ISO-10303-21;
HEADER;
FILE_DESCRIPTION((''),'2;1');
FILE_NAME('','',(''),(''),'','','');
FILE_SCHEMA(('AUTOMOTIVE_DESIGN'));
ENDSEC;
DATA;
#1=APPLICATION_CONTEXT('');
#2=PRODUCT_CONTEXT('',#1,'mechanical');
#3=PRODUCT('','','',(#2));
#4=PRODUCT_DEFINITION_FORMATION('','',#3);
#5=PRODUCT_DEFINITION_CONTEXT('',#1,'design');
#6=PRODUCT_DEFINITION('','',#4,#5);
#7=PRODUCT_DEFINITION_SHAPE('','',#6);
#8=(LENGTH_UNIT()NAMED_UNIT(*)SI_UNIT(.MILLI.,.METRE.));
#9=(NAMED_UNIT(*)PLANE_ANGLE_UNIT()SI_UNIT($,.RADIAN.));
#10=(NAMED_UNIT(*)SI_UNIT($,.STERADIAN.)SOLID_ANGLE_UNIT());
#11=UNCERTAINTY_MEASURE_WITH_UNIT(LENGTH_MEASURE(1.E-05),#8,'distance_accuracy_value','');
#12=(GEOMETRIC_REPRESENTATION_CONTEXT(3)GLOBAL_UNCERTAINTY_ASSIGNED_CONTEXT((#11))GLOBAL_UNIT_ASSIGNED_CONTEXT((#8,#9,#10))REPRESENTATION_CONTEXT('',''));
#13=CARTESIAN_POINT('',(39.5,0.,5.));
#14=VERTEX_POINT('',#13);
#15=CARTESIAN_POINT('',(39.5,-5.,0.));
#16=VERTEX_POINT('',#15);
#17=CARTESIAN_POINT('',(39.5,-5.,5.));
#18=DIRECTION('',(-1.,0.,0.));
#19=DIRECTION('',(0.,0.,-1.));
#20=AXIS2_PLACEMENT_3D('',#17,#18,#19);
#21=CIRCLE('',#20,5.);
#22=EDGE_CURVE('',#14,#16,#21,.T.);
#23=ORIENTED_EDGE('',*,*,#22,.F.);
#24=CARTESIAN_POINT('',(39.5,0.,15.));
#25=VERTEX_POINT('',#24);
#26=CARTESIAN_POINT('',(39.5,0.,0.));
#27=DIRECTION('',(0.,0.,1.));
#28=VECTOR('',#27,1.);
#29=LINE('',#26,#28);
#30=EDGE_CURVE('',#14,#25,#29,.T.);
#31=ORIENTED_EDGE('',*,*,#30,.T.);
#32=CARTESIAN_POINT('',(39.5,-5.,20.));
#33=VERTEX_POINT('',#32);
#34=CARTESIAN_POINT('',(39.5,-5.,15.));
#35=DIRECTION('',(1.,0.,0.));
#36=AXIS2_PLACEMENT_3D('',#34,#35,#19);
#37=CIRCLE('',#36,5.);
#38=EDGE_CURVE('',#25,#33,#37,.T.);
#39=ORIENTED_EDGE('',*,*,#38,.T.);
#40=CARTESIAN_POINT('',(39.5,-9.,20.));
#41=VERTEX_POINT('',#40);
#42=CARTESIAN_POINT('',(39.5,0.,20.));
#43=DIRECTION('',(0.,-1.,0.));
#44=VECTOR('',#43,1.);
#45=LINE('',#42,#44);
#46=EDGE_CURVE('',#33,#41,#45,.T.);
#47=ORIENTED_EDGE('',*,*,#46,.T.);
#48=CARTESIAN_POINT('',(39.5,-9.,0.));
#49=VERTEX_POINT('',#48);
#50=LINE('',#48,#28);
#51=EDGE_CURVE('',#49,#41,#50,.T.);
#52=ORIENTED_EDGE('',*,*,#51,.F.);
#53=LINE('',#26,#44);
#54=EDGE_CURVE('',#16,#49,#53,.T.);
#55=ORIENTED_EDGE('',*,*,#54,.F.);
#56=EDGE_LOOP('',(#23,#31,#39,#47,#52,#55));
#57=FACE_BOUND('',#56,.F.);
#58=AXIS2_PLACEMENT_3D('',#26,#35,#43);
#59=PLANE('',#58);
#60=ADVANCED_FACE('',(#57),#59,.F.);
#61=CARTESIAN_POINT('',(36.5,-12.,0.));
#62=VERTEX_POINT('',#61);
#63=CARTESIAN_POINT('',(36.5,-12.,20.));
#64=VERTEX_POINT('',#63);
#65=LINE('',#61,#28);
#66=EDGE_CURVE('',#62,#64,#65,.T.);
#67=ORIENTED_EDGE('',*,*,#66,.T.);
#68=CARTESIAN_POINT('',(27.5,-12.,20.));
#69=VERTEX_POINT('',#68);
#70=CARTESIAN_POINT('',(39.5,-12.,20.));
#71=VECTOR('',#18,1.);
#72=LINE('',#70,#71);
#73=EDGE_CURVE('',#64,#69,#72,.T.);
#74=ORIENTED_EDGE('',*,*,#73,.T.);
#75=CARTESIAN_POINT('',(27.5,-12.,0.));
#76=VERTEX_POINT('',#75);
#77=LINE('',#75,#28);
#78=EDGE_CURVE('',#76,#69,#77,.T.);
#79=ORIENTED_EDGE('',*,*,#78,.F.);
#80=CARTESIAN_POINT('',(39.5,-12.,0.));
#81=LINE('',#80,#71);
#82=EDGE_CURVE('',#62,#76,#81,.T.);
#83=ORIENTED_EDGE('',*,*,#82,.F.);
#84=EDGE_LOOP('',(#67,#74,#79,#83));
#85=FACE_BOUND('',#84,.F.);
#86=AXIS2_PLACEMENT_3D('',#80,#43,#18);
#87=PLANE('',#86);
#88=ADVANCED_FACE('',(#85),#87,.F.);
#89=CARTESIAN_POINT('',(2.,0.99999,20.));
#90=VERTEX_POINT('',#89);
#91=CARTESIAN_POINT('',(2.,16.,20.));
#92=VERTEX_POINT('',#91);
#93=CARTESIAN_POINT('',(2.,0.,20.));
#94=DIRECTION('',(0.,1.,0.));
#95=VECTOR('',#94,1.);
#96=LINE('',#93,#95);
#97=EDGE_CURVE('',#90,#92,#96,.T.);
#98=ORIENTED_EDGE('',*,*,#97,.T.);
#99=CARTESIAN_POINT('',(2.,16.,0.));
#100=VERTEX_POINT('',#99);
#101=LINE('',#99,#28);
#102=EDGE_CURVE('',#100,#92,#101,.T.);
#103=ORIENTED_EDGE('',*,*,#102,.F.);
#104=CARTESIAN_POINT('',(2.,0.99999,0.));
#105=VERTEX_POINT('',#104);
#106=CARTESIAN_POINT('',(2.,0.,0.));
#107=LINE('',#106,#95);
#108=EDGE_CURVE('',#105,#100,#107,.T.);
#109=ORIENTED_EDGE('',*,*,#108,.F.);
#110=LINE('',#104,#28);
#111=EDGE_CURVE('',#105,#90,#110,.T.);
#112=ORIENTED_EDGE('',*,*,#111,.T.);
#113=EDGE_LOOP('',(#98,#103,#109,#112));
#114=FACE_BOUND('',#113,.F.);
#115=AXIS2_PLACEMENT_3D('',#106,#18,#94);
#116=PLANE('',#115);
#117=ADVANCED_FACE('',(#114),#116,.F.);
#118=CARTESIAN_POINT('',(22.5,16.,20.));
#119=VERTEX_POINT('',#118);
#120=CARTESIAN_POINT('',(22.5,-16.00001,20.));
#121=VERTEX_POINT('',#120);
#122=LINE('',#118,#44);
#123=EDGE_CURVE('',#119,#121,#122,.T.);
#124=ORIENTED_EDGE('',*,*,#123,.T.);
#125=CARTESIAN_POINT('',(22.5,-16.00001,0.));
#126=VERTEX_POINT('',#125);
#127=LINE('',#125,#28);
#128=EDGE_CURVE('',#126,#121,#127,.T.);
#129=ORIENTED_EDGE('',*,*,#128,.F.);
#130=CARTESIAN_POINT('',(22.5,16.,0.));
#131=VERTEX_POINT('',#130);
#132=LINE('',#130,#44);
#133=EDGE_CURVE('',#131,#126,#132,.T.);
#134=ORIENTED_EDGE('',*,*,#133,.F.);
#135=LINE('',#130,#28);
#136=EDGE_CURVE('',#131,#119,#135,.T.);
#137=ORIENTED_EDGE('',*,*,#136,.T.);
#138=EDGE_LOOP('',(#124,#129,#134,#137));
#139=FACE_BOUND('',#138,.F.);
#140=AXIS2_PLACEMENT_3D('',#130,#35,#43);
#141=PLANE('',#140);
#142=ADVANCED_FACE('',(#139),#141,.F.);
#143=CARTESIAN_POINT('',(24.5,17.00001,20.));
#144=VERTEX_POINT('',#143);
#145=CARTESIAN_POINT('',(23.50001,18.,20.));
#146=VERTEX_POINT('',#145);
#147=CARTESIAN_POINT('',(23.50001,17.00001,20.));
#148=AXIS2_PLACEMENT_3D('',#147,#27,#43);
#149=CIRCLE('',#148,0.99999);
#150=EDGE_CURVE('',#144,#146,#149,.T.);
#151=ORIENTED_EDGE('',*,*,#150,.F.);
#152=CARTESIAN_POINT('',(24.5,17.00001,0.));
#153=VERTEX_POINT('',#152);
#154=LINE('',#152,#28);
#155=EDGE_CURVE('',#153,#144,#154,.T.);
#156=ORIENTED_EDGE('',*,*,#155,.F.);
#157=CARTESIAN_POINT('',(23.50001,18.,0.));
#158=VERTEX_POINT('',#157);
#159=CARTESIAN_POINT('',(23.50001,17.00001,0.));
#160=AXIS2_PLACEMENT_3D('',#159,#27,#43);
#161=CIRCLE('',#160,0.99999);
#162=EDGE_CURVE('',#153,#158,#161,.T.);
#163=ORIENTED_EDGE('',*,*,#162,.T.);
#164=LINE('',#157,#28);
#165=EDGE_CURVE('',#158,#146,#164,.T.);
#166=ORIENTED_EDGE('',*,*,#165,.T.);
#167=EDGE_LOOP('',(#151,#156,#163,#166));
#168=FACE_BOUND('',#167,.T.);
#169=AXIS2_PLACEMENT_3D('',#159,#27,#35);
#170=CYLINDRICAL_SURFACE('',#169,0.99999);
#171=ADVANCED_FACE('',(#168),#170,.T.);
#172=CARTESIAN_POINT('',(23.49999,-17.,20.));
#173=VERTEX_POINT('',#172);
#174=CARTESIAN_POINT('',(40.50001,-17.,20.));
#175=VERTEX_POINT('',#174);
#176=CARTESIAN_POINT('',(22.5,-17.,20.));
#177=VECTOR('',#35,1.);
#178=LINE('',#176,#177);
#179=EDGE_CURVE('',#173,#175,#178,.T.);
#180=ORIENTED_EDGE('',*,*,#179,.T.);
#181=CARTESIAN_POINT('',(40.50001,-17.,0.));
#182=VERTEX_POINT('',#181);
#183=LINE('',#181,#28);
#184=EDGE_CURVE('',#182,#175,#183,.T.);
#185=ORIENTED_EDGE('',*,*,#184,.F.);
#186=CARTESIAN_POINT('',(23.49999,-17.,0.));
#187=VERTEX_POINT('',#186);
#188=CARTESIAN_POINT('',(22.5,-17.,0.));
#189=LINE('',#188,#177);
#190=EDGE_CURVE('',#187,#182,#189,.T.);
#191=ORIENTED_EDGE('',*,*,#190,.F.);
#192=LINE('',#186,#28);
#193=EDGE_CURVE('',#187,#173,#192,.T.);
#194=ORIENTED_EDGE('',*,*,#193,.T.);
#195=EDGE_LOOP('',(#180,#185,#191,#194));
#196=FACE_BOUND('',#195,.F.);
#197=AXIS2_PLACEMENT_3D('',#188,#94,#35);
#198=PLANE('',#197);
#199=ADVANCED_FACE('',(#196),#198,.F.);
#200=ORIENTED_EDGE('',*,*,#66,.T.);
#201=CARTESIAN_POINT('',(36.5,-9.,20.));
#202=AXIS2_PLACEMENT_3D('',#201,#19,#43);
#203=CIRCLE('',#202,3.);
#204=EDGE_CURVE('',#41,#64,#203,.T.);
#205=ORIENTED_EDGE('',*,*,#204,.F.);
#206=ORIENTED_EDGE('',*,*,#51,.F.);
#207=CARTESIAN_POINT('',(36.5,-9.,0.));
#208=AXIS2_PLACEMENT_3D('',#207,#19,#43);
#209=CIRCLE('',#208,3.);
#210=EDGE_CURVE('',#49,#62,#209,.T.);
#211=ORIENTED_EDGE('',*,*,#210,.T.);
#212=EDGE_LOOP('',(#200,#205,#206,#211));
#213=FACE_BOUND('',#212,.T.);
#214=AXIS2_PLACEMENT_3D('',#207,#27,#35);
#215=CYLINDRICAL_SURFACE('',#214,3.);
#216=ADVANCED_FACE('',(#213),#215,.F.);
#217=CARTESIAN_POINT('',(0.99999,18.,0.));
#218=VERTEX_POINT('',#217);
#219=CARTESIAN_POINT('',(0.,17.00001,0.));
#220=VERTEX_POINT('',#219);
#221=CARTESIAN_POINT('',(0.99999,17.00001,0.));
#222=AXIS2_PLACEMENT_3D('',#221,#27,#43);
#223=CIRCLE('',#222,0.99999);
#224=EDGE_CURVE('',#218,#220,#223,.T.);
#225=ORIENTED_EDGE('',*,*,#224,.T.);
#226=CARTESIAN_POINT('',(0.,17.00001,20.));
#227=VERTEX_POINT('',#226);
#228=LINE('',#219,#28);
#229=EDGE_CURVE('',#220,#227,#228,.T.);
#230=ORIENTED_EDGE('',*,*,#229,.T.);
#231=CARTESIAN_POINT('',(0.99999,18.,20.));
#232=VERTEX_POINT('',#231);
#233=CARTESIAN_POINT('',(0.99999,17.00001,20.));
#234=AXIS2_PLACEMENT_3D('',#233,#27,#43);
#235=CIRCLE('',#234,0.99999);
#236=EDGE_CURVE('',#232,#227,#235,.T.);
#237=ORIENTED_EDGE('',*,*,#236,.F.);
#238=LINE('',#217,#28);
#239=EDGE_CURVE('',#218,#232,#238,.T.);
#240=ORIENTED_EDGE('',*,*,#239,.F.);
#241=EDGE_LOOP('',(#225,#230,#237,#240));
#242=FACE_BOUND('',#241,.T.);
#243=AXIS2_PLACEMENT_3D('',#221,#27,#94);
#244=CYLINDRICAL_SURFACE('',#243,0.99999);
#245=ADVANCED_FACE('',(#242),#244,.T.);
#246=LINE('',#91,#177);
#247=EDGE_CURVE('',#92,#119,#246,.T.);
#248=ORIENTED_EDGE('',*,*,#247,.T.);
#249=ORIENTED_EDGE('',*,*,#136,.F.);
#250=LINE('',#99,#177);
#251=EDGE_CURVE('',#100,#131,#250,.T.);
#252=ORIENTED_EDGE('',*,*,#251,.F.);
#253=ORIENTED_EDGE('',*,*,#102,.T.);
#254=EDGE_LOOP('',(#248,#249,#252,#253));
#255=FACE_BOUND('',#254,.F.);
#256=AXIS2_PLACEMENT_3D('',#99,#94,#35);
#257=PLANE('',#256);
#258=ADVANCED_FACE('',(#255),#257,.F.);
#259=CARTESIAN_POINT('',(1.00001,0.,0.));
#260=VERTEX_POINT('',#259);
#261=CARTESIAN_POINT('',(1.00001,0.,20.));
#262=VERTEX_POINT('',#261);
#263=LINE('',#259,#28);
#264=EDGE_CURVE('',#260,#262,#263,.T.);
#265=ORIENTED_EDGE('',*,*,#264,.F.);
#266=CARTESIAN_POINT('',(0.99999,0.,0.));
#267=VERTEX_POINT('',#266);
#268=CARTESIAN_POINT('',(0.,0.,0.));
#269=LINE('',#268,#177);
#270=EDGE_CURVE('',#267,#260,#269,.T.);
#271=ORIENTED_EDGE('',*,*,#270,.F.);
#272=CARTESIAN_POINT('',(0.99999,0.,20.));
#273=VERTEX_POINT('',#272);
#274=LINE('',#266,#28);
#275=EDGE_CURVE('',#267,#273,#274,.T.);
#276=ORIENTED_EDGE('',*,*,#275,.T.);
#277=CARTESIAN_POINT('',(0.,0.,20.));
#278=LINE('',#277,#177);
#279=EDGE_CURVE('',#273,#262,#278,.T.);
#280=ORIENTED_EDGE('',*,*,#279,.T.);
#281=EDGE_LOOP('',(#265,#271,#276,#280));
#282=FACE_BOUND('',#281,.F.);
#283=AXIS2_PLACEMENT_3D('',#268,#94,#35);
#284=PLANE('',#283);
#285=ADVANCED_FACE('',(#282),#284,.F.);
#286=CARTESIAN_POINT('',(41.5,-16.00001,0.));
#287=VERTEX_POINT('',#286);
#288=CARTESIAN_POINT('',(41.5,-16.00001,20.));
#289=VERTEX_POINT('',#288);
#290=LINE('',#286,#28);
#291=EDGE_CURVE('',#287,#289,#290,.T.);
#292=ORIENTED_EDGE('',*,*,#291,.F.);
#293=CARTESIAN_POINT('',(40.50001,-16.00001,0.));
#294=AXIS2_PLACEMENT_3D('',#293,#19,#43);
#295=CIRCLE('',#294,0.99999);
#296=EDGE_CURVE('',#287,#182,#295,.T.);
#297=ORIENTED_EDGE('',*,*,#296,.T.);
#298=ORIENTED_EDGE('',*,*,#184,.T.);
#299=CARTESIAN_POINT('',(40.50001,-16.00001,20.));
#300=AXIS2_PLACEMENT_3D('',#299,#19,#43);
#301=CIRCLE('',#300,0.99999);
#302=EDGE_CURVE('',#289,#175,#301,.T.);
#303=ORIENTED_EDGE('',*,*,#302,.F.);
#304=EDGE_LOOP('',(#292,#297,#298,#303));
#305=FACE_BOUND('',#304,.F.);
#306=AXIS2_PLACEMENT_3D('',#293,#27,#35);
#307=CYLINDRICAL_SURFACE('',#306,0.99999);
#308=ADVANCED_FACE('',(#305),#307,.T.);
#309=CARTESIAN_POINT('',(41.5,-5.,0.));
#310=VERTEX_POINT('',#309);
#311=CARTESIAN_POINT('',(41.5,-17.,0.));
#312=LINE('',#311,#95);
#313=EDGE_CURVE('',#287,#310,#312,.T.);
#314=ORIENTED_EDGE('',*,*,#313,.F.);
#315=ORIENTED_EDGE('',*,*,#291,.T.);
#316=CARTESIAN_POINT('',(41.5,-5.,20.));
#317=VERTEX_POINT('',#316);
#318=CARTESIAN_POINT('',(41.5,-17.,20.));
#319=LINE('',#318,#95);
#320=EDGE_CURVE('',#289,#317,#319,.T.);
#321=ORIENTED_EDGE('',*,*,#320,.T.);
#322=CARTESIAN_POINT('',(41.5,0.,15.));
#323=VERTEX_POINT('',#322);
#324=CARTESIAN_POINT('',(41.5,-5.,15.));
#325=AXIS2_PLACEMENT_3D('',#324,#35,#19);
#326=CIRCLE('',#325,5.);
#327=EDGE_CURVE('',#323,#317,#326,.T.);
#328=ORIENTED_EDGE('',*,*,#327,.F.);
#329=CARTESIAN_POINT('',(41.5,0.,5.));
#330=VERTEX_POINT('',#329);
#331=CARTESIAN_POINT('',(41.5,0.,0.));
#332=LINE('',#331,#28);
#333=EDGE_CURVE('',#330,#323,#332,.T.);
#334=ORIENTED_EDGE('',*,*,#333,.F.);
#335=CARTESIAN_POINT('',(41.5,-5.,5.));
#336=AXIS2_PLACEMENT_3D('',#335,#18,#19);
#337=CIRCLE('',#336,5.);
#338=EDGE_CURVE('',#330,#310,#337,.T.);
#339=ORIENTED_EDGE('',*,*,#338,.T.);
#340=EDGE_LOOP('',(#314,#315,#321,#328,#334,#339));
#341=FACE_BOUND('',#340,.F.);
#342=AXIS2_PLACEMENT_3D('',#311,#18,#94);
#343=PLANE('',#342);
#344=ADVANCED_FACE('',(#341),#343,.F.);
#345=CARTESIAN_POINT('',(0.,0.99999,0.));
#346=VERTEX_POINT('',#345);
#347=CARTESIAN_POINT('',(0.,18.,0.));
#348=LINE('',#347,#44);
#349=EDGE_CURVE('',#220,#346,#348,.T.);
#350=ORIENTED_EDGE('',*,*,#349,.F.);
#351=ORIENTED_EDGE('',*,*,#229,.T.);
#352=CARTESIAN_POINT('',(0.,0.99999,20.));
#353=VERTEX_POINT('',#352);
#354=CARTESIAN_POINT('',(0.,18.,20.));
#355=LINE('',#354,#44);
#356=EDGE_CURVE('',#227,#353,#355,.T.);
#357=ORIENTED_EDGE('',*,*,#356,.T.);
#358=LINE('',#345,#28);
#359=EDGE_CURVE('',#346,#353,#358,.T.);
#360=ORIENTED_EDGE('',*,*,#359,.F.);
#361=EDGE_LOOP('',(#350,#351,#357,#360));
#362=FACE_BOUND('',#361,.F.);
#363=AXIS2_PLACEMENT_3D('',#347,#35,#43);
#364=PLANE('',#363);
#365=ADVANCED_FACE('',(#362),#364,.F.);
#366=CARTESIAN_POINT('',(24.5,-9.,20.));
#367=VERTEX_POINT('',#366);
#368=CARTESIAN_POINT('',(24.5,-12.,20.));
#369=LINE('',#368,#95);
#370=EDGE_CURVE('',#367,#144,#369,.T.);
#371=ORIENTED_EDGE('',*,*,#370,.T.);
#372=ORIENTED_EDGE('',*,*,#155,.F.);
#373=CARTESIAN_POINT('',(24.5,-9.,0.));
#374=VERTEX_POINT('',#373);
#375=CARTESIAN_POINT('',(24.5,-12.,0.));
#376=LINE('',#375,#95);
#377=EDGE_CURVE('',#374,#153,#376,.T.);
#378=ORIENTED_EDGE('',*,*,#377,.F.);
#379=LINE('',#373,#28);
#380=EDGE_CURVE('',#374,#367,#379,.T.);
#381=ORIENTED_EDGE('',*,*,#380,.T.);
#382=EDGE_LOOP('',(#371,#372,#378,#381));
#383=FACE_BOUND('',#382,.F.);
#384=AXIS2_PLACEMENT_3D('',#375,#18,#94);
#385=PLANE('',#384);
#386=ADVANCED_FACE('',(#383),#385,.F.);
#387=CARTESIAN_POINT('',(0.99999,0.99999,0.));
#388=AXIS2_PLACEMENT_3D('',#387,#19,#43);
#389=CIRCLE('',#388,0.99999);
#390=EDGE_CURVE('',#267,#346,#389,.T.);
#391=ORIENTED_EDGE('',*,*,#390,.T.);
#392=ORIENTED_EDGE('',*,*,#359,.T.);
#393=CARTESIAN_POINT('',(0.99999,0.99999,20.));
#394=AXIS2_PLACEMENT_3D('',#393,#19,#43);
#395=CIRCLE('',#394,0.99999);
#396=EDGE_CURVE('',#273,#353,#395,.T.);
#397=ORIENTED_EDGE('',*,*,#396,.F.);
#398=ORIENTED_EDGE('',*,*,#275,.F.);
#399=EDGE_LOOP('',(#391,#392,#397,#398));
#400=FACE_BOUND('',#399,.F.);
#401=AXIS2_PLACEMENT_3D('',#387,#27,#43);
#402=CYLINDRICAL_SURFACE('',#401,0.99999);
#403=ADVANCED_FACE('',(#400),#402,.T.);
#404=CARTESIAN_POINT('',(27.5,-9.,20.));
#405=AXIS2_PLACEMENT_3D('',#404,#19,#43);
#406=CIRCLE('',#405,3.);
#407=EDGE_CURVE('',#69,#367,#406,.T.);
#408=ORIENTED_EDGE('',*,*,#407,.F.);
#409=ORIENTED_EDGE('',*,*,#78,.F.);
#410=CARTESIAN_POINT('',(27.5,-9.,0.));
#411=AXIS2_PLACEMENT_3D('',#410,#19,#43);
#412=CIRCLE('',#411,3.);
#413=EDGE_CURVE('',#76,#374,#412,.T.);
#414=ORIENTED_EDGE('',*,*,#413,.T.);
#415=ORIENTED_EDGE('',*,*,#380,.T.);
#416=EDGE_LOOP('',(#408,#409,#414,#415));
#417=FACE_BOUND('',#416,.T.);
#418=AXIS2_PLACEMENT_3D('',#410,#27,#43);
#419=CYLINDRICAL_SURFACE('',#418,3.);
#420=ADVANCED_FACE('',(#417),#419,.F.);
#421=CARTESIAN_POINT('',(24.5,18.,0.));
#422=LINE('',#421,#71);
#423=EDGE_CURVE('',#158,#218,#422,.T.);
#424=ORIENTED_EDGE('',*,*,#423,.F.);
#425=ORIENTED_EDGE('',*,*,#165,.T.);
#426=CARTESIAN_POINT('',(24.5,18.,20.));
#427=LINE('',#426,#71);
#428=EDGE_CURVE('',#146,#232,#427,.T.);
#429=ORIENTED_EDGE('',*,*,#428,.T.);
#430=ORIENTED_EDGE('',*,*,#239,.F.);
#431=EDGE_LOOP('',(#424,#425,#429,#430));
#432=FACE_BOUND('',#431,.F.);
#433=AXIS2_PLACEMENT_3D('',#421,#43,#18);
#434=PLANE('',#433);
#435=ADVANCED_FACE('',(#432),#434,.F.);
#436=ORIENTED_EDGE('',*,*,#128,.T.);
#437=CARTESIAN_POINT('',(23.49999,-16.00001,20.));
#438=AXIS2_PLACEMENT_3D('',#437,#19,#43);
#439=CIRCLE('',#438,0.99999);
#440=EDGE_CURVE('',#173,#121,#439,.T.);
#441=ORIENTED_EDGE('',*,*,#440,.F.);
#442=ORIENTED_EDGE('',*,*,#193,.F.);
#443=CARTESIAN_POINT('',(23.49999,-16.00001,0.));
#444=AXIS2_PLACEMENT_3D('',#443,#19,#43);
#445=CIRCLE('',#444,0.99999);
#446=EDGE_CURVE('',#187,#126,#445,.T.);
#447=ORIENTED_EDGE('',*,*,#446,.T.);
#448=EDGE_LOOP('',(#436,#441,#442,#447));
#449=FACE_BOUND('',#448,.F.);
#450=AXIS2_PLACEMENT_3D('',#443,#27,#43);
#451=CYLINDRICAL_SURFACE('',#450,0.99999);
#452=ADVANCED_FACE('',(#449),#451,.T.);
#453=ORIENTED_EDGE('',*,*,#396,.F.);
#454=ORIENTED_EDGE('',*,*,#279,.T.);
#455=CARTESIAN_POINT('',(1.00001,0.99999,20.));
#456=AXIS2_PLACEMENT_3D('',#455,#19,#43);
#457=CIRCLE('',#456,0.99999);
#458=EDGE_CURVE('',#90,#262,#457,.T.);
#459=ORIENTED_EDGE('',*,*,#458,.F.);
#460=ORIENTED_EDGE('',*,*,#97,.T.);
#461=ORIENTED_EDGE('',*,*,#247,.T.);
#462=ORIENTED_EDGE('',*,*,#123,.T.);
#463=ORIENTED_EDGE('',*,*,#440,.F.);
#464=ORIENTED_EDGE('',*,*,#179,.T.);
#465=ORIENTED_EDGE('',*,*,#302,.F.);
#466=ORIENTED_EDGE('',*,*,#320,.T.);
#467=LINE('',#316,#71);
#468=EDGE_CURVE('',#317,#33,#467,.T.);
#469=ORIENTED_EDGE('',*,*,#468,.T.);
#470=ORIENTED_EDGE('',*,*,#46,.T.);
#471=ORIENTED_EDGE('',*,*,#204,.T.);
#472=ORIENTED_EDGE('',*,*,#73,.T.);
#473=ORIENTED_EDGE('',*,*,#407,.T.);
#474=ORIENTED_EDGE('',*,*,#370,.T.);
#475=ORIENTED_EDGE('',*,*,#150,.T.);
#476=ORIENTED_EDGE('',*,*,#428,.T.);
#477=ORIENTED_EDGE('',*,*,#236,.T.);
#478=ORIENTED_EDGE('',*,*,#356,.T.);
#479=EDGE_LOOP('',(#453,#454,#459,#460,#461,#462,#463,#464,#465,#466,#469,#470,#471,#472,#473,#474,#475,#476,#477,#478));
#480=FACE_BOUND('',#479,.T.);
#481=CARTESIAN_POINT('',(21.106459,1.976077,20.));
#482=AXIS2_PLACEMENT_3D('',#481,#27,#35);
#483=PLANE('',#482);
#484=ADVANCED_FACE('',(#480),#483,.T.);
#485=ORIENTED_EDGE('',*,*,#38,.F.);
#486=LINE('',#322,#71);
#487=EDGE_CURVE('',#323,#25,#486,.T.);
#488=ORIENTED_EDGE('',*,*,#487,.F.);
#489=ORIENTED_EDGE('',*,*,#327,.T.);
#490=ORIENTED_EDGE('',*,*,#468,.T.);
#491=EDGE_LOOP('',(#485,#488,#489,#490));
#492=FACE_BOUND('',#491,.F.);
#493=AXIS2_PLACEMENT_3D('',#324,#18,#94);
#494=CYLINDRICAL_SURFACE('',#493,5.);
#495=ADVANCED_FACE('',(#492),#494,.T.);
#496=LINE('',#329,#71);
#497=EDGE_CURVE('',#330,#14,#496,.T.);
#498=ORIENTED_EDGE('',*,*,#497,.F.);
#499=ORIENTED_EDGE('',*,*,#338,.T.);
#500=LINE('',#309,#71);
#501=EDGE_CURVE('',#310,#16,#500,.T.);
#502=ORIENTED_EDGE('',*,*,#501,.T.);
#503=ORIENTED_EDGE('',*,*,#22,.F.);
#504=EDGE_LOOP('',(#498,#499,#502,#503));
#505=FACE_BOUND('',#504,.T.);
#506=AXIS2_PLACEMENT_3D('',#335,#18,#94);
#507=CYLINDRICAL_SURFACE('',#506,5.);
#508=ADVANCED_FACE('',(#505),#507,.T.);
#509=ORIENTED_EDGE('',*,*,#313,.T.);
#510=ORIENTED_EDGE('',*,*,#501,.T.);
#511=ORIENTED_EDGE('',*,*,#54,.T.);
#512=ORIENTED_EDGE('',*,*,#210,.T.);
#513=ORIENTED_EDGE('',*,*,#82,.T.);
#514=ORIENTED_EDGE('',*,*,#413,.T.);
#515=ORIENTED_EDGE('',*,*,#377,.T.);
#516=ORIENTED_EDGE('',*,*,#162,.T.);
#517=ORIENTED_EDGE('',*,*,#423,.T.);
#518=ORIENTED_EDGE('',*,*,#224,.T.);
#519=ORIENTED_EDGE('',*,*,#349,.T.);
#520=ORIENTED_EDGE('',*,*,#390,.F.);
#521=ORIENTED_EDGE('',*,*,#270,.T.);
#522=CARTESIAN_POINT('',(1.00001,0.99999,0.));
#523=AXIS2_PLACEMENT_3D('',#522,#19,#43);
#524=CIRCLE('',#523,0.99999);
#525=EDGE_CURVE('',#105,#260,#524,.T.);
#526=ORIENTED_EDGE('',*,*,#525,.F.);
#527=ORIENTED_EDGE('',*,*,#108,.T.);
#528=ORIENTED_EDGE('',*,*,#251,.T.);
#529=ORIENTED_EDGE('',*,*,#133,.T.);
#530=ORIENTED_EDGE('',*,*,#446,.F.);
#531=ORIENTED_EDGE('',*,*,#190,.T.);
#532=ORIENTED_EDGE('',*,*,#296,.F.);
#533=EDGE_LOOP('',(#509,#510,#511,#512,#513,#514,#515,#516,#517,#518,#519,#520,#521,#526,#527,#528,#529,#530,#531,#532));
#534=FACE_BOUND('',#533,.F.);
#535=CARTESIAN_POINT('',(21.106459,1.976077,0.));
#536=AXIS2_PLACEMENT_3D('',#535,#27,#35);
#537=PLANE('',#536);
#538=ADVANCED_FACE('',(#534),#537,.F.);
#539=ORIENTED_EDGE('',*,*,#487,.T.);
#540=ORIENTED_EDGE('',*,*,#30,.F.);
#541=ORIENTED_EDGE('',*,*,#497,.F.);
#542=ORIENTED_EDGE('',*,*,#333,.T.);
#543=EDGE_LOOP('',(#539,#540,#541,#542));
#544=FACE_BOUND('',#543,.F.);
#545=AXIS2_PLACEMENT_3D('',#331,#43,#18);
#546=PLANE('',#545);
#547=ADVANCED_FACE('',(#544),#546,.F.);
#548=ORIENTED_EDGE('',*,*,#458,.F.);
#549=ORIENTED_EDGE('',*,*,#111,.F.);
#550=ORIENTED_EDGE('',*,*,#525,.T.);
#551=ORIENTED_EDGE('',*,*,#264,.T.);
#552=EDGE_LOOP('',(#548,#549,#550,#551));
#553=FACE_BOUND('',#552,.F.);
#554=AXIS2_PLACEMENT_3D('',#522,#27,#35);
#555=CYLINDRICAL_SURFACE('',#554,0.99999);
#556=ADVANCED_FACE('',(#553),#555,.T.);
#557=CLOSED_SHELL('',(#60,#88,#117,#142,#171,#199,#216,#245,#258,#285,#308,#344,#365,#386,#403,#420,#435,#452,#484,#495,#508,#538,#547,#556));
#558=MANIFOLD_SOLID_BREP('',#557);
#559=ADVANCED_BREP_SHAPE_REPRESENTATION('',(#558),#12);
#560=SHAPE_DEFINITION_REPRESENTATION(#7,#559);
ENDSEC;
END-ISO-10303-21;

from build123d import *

# Parameters (mm, degrees)
F1_DEPTH = 20
F2_R     = 5
F3_R     = 0.99999
F4_R     = 3


# Not quite as in the source:
# - a fillet or chamfer is up to 0.001 mm smaller than in the source, because OpenCascade refuses the exact size


with BuildPart() as f1:
    # F0 (on Top) → F1 (new body)
    with BuildSketch(Plane.XY):
        Polygon((0, 18), (0, 0), (2, 0), (2, 16), (22.5, 16), (22.5, -17), (41.5, -17), (41.5, 0), (39.5, 0), (39.5, -12), (24.5, -12), (24.5, 18), align=None)
    extrude(amount=F1_DEPTH)

    # F2
    f2_edges = [f1.edges().sort_by_distance(p)[0] for p in [
        (40.5, 0, 20),
        (40.5, 0, 0),
    ]]
    fillet(f2_edges, radius=F2_R)

    # F3 (radius 1 in the source; OpenCascade refuses exactly that, so slightly less here)
    f3_edges = [f1.edges().sort_by_distance(p)[0] for p in [
        (0, 18, 10),
        (24.5, 18, 10),
        (2, 0, 10),
        (22.5, -17, 10),
        (41.5, -17, 10),
        (0, 0, 10),
    ]]
    fillet(f3_edges, radius=F3_R)

    # F4
    f4_edges = [f1.edges().sort_by_distance(p)[0] for p in [
        (24.5, -12, 10),
        (39.5, -12, 10),
    ]]
    fillet(f4_edges, radius=F4_R)


solid = f1.part
